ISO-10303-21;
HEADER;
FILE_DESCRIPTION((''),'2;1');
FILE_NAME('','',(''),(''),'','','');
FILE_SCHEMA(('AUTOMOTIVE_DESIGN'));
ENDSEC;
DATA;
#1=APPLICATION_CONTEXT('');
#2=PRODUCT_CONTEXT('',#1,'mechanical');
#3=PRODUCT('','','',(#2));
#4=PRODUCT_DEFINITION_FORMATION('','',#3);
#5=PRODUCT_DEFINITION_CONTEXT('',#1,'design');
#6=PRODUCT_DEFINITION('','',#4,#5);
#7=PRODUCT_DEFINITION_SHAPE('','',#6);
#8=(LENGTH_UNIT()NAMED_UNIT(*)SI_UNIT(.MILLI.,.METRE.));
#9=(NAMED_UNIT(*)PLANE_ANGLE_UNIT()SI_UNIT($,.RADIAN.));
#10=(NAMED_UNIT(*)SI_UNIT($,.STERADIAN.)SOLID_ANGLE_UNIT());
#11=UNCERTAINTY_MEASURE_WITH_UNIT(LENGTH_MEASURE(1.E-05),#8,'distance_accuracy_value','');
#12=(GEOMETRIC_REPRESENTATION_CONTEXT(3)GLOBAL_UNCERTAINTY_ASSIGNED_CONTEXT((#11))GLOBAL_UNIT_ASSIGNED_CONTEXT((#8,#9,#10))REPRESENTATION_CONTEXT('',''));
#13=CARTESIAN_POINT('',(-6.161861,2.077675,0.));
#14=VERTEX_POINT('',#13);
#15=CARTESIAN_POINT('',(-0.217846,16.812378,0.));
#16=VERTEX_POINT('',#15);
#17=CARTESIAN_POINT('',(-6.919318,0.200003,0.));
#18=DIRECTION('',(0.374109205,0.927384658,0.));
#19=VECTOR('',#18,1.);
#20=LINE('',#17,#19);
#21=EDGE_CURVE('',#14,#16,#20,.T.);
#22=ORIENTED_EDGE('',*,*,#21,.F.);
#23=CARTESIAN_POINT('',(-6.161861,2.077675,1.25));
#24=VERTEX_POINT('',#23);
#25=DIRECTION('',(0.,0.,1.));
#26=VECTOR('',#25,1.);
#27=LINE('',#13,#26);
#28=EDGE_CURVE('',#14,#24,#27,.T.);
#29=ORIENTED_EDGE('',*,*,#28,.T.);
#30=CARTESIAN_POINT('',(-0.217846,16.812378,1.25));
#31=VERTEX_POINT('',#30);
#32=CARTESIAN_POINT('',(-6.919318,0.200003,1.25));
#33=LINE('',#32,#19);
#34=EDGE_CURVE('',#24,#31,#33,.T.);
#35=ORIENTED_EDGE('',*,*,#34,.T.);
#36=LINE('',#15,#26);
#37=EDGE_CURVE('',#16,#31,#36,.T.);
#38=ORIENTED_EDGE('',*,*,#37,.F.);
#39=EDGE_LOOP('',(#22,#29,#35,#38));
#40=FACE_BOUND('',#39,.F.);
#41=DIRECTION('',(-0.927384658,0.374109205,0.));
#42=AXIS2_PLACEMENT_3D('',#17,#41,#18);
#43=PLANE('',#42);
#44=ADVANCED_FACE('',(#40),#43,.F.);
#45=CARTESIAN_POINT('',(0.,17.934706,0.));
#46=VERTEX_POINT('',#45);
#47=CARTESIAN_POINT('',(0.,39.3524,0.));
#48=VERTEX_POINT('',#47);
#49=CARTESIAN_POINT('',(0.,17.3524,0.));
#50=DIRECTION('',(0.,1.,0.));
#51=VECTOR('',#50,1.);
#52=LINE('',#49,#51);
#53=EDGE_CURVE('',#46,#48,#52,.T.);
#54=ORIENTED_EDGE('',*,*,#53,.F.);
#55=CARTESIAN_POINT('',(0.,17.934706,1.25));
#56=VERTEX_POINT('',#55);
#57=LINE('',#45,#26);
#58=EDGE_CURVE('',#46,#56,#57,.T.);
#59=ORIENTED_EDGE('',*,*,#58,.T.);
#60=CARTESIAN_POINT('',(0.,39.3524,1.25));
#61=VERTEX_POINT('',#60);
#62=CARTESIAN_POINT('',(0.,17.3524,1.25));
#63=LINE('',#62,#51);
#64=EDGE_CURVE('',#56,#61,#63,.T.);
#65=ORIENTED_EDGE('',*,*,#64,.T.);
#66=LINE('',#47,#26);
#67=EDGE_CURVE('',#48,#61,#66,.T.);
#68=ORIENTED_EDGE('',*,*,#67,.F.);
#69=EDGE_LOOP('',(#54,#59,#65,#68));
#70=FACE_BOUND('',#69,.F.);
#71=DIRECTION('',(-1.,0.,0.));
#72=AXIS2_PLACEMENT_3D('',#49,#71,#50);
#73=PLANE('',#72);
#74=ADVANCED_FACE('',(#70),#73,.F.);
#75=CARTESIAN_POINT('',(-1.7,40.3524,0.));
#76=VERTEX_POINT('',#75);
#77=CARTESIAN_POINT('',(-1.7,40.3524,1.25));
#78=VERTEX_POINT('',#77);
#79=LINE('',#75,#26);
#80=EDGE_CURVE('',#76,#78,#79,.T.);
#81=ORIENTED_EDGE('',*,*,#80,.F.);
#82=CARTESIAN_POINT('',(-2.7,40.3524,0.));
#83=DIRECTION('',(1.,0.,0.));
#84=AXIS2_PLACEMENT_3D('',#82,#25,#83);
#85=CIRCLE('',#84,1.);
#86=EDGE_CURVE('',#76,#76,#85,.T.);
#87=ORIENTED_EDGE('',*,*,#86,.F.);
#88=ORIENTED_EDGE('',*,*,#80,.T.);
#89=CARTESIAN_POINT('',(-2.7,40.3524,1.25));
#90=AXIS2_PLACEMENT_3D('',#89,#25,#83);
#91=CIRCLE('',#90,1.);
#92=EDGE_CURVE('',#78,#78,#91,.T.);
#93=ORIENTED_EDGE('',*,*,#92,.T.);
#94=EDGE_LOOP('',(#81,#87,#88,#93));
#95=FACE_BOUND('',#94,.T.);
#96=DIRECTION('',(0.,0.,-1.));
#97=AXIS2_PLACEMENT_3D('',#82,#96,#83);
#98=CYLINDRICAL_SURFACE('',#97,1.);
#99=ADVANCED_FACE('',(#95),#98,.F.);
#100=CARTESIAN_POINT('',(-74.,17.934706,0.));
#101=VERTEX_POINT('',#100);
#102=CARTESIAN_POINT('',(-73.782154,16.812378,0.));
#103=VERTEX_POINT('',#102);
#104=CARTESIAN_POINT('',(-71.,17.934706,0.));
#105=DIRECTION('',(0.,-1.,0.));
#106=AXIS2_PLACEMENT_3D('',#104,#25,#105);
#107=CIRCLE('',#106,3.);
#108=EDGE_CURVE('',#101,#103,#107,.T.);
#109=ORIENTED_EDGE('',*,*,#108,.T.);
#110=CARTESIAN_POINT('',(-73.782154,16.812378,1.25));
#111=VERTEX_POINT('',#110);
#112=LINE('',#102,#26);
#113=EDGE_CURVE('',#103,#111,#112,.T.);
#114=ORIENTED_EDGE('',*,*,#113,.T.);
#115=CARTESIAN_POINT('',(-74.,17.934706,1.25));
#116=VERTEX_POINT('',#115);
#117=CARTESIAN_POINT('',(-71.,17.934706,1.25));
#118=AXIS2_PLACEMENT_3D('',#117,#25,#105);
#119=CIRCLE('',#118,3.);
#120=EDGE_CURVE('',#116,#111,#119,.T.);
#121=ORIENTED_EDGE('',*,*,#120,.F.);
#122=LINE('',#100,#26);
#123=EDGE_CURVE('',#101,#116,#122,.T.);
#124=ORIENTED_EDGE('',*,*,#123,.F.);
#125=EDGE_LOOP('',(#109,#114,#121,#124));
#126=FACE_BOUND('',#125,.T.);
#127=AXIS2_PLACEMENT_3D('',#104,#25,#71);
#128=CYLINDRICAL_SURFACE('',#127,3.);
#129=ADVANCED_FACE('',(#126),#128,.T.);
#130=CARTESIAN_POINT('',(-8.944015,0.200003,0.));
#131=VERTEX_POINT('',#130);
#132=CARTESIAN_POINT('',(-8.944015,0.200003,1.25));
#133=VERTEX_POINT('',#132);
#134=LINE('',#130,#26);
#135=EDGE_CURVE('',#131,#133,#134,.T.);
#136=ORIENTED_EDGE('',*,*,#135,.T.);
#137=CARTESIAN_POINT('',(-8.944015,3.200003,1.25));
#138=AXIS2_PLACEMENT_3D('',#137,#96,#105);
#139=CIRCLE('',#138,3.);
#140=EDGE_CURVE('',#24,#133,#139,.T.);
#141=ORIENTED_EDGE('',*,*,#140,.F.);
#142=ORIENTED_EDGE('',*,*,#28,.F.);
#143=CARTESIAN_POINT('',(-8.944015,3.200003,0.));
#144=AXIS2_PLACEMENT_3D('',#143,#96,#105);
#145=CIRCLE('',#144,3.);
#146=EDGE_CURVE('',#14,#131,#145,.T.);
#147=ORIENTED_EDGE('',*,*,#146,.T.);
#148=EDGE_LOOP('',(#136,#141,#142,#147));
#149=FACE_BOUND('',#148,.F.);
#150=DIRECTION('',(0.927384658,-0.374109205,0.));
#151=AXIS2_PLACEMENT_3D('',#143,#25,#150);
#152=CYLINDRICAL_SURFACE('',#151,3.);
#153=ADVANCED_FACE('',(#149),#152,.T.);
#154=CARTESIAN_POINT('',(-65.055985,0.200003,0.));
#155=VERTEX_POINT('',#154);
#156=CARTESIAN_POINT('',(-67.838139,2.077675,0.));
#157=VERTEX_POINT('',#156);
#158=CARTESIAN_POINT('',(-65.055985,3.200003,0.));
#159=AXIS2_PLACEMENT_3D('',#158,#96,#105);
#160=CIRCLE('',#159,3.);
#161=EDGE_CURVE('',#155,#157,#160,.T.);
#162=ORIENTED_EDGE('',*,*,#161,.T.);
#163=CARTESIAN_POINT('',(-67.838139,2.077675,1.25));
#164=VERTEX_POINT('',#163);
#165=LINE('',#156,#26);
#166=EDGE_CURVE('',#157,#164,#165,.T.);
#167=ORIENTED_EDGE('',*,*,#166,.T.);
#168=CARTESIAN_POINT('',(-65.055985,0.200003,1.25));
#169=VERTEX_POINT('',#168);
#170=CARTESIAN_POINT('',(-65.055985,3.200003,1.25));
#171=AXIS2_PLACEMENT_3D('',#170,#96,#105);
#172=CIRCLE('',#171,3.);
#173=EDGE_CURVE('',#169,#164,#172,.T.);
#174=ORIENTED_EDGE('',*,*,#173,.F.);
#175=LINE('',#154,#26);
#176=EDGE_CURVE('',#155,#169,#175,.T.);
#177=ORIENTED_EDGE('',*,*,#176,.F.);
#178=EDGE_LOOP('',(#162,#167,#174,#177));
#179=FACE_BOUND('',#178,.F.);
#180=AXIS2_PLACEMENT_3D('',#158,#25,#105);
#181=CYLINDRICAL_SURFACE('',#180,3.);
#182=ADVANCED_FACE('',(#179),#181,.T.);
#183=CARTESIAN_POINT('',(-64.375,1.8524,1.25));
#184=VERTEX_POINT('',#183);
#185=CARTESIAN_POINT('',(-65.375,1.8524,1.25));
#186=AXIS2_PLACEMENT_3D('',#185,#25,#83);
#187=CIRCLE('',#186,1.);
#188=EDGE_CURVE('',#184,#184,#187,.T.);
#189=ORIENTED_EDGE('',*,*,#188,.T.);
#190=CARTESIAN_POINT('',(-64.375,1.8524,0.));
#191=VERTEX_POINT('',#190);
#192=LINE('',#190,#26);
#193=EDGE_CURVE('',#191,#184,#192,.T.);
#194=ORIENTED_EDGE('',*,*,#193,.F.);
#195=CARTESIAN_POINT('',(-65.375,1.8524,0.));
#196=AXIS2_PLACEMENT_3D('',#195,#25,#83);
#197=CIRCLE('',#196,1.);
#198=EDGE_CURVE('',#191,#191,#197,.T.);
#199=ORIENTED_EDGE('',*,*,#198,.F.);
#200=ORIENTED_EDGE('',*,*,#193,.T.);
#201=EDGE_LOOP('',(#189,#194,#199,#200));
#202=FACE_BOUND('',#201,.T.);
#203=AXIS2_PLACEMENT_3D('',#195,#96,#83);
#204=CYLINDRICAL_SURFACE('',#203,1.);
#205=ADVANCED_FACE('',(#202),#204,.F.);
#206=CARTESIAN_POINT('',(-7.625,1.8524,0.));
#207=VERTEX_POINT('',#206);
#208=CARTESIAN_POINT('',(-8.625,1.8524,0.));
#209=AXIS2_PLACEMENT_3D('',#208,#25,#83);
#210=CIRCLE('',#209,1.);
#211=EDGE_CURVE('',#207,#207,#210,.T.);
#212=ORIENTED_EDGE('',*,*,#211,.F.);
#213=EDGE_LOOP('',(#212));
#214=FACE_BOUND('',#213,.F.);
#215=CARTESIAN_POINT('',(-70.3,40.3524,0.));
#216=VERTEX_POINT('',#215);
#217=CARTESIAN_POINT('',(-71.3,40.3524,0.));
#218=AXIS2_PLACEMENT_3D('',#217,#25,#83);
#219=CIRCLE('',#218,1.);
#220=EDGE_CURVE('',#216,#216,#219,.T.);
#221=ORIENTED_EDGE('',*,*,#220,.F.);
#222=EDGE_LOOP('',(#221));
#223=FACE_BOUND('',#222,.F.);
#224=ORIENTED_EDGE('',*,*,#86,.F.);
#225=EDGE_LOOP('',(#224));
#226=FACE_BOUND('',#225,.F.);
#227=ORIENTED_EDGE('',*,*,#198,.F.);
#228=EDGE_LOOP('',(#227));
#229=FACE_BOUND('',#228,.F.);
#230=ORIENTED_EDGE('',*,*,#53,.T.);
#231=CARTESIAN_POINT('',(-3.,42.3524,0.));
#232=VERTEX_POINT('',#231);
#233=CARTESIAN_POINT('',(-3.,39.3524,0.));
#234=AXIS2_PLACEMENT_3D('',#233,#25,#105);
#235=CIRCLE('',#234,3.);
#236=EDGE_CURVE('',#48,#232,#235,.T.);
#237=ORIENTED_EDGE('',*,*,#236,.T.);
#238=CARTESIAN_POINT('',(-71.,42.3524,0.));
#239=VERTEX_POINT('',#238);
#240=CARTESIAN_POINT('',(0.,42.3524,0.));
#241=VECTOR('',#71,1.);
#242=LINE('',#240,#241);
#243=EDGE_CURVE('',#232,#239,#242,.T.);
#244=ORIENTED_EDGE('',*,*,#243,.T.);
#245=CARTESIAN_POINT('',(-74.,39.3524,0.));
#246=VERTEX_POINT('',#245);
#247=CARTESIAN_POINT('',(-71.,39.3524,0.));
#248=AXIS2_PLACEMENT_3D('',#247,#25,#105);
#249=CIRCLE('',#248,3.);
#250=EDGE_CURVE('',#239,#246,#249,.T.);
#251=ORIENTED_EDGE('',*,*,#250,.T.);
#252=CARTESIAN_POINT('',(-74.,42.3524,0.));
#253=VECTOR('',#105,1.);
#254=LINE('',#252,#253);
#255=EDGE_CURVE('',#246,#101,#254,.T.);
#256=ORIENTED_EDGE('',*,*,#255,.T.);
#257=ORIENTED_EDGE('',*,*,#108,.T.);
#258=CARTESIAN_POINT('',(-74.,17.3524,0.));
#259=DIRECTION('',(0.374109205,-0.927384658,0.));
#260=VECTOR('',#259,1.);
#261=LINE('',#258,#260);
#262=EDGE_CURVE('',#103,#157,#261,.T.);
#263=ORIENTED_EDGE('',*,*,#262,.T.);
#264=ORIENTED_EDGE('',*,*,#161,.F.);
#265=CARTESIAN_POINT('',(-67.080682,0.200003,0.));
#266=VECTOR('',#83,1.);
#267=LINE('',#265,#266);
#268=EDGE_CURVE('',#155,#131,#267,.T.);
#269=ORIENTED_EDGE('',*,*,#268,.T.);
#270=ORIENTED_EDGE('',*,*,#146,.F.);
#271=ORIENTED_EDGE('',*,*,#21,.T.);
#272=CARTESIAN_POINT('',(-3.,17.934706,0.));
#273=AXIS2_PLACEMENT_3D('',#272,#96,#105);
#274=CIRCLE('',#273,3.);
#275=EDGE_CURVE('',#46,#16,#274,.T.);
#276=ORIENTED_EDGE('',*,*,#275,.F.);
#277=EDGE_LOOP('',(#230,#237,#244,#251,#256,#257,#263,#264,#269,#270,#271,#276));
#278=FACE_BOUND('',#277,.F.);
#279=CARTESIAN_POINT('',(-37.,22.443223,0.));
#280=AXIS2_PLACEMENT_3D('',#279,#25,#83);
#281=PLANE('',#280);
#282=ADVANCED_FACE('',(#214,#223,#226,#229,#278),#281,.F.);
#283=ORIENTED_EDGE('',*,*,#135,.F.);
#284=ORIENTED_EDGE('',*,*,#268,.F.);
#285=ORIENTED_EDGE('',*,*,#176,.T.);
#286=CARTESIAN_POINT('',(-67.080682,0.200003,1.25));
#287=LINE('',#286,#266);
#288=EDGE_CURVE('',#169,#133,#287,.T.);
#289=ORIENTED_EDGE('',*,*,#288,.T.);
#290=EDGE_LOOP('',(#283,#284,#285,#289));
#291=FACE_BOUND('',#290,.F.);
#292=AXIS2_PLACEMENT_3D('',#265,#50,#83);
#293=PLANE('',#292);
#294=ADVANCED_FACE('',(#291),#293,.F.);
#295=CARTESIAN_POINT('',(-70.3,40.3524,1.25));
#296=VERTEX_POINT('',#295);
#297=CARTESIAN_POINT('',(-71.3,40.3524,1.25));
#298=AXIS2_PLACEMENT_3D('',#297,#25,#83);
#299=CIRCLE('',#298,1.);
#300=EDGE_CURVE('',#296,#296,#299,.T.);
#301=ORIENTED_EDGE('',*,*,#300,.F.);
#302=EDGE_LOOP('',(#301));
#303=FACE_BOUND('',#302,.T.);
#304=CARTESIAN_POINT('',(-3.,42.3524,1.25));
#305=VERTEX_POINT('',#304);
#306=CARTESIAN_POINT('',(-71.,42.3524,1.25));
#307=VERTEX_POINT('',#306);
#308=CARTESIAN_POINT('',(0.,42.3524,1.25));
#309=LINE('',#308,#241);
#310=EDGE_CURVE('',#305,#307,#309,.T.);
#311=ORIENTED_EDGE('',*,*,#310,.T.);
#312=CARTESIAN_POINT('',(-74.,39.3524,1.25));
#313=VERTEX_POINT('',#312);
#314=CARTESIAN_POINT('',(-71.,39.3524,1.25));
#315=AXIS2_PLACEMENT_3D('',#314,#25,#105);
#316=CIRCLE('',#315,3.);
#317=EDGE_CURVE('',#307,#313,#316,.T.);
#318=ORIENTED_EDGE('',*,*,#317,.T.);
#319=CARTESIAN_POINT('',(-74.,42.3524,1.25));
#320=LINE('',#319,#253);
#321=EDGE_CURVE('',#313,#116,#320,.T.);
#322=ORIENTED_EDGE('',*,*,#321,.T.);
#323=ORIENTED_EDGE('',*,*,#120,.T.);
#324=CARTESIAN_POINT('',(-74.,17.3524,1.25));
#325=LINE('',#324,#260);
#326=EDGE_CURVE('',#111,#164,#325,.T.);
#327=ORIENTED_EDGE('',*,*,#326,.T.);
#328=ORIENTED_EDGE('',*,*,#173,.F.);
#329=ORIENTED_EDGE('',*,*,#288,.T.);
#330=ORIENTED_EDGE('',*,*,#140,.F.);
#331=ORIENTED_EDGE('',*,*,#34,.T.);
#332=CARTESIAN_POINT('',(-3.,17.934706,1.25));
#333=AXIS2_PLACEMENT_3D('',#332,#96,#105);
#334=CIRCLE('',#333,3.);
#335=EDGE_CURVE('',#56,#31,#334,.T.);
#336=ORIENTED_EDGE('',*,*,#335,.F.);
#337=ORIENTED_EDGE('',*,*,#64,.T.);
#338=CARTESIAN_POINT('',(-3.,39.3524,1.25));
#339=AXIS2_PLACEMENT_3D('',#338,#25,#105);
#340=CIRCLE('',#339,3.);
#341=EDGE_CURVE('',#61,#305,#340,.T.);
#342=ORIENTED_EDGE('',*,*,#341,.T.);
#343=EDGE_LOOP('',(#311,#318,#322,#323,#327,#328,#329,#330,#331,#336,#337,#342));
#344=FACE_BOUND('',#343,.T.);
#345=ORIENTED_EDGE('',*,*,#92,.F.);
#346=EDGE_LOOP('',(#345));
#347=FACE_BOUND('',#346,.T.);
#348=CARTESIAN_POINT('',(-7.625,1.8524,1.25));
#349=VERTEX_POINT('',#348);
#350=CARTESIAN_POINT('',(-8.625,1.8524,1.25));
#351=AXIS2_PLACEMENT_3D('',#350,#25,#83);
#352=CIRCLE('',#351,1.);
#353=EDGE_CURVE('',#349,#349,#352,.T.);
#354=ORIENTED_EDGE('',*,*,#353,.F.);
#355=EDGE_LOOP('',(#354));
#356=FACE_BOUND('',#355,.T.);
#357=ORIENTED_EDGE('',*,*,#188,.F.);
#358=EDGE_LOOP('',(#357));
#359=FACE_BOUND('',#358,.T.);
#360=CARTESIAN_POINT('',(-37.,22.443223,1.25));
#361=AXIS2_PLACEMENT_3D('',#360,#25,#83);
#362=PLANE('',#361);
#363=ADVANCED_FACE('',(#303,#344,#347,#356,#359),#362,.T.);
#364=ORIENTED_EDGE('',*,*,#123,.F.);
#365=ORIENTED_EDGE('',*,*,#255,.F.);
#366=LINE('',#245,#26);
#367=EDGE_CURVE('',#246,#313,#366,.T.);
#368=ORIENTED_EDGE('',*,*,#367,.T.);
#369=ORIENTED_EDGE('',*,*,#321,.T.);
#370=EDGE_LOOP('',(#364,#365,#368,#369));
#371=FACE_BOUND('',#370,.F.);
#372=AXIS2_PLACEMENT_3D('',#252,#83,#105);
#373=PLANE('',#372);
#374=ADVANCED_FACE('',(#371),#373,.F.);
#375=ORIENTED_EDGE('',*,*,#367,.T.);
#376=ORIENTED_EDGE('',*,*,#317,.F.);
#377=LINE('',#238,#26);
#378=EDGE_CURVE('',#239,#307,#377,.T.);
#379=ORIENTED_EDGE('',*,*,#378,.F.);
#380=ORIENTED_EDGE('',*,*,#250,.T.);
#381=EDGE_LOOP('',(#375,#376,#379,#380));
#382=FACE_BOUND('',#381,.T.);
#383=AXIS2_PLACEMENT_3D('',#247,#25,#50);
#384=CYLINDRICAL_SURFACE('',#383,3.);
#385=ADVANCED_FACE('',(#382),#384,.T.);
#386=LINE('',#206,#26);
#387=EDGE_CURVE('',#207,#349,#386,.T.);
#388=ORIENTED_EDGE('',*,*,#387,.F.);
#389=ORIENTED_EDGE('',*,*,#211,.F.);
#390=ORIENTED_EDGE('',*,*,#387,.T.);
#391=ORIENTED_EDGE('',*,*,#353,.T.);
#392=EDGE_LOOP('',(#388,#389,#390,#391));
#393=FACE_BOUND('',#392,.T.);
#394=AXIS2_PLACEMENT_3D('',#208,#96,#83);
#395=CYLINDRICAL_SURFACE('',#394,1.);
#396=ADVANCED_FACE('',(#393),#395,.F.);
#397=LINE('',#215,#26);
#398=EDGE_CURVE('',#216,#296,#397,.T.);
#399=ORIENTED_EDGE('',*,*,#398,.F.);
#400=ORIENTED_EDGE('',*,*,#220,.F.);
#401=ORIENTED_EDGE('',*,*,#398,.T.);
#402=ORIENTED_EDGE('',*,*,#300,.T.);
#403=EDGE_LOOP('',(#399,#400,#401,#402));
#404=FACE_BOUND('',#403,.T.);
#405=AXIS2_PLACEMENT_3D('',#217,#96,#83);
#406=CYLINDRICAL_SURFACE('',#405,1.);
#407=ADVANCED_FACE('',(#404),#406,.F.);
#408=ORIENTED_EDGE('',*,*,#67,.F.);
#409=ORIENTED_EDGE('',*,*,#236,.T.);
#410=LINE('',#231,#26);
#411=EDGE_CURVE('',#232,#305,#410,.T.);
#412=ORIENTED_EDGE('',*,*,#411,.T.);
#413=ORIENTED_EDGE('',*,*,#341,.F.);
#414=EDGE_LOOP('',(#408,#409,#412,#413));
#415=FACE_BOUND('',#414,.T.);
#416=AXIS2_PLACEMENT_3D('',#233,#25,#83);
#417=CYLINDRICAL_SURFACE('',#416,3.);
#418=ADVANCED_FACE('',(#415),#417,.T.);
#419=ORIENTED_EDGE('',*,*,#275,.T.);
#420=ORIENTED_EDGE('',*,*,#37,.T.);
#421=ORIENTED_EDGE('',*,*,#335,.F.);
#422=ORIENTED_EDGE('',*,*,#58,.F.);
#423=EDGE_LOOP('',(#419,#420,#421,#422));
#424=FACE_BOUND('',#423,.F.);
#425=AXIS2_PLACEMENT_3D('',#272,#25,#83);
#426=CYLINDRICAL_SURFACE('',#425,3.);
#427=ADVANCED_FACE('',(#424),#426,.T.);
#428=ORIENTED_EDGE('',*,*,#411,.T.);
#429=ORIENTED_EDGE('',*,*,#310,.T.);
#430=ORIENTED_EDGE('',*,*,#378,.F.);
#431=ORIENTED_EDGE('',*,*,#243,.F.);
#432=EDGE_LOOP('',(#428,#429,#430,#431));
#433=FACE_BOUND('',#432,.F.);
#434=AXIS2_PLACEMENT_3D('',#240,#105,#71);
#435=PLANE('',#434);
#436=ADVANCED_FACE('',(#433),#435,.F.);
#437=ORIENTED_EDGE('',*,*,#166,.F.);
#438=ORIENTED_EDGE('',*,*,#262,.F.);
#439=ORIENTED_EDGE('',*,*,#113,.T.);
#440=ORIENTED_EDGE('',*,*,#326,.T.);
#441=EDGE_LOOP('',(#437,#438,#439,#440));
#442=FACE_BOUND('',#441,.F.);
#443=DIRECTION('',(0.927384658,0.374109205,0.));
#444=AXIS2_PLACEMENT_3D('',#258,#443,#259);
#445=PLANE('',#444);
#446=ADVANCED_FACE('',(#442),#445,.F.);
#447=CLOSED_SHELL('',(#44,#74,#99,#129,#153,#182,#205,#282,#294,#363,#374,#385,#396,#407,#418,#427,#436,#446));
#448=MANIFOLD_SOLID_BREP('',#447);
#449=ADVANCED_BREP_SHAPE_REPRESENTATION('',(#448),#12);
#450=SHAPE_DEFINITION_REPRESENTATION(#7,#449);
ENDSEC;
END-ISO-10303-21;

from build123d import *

# Parameters (mm, degrees)
F0_R     = 1
F1_DEPTH = 1.25
F2_R     = 3


with BuildPart() as f1:
    # F0 (on Top) → F1 (new body)
    with BuildSketch(Plane.XY):
        Polygon((0, 17.3524001093), (0, 42.3524001093), (-74, 42.3524001093), (-74, 17.3524001093), (-67.080681713, 0.2000030523), (-6.919318287, 0.2000030523), align=None)
        with Locations((-65.375, 1.8524001093)):
            Circle(F0_R, mode=Mode.SUBTRACT)
        with Locations((-8.625, 1.8524001093)):
            Circle(F0_R, mode=Mode.SUBTRACT)
        with Locations((-71.3, 40.3524001093)):
            Circle(F0_R, mode=Mode.SUBTRACT)
        with Locations((-2.7, 40.3524001093)):
            Circle(F0_R, mode=Mode.SUBTRACT)
    extrude(amount=F1_DEPTH)

    # F2
    f2_edges = [f1.edges().sort_by_distance(p)[0] for p in [
        (0, 42.3524, 0.625),
        (-74, 42.3524, 0.625),
        (-74, 17.3524, 0.625),
        (0, 17.3524, 0.625),
        (-6.919318, 0.200003, 0.625),
        (-67.080682, 0.200003, 0.625),
    ]]
    fillet(f2_edges, radius=F2_R)


solid = f1.part
